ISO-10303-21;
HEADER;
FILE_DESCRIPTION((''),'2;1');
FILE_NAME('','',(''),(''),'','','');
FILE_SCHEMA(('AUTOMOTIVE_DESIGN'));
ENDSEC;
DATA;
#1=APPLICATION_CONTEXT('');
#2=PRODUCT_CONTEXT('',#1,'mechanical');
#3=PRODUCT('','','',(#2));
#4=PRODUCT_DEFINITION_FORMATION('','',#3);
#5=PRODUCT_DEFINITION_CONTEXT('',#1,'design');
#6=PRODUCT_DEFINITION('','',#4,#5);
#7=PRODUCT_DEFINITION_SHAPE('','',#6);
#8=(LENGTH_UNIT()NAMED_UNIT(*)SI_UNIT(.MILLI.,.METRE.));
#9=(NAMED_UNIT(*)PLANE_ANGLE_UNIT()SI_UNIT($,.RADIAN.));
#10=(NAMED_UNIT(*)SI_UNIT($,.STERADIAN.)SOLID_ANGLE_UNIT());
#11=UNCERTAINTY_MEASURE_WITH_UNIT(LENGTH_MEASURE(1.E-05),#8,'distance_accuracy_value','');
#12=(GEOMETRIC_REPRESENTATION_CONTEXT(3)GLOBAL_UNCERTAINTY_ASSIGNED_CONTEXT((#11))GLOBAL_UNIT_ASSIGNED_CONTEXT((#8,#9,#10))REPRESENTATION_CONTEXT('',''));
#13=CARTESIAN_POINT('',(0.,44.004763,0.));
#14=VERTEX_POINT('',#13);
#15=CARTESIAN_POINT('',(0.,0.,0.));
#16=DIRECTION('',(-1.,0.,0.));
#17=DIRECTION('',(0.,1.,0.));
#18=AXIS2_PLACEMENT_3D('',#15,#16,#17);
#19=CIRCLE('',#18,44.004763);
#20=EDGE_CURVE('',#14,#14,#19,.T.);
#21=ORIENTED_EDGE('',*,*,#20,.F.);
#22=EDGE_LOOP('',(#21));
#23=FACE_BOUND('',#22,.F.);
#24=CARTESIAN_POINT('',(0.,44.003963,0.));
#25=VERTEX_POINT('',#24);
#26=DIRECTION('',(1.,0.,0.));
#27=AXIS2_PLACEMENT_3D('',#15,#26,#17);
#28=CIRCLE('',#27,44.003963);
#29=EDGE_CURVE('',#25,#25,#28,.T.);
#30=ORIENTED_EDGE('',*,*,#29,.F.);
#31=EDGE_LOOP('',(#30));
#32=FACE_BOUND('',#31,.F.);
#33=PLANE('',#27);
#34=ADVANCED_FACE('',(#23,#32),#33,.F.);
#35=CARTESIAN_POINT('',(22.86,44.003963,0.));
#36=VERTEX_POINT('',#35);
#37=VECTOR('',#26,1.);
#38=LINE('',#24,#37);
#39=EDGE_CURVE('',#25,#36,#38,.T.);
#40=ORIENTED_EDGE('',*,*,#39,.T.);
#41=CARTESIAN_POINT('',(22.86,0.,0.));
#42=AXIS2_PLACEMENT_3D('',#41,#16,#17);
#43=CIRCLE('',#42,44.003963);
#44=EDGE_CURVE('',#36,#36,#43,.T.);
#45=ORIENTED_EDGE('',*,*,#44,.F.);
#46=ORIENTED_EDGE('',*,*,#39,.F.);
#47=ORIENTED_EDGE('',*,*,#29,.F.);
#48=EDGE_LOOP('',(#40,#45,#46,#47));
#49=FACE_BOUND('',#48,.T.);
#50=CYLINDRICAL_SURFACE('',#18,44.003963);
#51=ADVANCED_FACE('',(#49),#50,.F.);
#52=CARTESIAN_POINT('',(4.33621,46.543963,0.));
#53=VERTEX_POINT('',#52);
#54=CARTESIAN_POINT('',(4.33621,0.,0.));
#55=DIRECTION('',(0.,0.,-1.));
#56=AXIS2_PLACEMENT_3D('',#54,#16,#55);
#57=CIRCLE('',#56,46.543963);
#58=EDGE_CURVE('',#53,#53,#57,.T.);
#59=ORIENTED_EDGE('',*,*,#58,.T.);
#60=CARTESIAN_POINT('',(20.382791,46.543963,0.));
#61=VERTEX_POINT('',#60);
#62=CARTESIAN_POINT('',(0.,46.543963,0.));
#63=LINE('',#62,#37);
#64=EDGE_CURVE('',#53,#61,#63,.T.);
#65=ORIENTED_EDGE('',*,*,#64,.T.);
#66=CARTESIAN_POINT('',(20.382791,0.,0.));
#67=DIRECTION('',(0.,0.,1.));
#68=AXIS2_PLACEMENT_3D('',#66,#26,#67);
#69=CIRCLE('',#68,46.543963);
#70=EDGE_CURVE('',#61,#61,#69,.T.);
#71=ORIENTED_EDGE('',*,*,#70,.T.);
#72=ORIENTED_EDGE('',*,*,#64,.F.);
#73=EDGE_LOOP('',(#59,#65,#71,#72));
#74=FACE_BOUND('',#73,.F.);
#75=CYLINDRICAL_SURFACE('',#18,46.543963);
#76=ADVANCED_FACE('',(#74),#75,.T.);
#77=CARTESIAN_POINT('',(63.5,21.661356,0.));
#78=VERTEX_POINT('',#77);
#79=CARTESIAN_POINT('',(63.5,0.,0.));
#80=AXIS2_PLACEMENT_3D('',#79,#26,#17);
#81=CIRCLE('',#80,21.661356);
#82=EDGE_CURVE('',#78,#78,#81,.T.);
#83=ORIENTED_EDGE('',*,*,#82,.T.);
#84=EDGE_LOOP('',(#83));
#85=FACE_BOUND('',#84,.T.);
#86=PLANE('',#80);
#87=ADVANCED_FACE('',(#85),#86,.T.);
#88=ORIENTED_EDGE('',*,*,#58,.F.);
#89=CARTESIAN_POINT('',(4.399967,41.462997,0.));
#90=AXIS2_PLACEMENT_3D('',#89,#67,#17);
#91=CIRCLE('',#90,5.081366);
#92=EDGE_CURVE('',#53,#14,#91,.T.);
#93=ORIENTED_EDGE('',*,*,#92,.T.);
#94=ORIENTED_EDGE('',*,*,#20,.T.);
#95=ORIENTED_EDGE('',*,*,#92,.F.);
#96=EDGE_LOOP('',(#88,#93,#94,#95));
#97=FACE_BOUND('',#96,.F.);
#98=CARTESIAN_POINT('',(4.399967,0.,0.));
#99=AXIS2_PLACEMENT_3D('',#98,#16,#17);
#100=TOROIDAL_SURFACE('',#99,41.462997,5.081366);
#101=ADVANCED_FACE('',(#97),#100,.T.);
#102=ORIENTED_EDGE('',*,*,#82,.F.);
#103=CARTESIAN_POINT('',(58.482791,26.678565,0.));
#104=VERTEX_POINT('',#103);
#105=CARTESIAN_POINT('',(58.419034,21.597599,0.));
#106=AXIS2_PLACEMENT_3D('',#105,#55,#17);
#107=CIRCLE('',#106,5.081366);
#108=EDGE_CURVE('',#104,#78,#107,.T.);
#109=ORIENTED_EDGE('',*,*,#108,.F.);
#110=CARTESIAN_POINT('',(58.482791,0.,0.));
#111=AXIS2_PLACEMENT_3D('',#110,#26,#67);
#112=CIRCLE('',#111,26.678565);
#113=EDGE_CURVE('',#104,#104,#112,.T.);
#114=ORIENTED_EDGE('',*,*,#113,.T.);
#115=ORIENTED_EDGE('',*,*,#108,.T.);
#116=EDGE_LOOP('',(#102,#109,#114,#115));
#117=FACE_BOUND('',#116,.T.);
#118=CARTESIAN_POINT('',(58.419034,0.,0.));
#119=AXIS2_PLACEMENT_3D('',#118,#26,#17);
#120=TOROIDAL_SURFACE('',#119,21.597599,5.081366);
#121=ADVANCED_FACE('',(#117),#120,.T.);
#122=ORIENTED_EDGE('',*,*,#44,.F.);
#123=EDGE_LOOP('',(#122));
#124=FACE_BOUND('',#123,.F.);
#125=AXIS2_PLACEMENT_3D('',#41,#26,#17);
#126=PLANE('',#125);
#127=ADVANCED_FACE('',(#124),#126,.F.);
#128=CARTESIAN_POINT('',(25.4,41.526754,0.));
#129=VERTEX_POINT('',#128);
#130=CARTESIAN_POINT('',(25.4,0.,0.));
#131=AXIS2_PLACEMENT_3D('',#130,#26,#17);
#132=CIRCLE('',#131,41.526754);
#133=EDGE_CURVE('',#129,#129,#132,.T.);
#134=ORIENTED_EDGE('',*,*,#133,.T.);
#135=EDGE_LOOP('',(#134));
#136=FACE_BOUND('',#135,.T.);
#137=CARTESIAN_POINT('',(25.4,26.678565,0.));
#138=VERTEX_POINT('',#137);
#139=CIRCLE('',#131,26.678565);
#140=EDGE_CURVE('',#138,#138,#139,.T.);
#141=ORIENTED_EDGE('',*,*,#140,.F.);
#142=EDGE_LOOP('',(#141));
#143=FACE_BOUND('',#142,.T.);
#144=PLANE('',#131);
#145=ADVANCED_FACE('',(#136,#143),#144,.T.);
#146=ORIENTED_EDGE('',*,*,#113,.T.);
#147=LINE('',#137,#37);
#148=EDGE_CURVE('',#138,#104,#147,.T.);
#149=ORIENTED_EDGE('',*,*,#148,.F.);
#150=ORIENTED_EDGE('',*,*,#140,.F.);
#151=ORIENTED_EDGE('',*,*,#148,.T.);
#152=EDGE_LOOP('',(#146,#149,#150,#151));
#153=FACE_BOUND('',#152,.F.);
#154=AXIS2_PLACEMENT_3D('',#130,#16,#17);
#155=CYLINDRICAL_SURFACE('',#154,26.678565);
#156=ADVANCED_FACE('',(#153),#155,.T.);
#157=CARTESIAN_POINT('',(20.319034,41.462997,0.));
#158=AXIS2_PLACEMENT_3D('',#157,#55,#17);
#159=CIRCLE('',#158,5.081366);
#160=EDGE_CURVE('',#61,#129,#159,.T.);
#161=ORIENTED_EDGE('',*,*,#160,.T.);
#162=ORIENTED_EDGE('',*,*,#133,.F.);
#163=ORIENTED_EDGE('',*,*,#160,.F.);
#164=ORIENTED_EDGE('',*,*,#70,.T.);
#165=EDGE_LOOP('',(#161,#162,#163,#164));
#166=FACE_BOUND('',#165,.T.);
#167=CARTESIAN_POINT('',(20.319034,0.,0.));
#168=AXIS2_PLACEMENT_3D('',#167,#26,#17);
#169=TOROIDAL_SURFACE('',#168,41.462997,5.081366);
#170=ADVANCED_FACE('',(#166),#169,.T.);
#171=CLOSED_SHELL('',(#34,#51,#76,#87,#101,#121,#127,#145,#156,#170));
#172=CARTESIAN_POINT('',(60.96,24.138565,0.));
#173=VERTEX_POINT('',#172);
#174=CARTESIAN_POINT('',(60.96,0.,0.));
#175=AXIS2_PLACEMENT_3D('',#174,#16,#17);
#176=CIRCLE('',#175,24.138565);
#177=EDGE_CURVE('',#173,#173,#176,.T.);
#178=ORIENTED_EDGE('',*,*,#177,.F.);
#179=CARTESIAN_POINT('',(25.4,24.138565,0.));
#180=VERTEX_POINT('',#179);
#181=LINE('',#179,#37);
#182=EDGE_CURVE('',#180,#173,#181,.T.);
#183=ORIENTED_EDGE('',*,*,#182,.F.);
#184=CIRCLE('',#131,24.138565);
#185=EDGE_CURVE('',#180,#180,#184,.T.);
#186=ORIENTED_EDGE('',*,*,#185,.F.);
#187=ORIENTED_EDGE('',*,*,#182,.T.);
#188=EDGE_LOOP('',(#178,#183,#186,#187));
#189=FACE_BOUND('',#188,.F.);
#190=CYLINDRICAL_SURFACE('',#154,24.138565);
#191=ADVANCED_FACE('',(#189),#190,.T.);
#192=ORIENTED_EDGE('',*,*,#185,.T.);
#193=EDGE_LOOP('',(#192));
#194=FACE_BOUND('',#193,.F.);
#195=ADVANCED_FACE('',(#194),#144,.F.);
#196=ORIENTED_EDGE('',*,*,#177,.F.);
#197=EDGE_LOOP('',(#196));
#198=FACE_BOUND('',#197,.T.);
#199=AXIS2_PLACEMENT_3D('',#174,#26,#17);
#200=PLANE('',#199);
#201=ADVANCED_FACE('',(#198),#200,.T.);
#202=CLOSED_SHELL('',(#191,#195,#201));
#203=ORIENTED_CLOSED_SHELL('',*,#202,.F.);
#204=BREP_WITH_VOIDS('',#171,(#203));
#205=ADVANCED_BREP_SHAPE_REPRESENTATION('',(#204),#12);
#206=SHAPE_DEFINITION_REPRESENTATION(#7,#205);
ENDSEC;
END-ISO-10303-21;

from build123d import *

# Parameters (mm, degrees)
F0_R     = 46.5439630146
F1_DEPTH = 25.4
F2_T     = -2.54
F3_R     = 26.6785648963
F4_DEPTH = 38.1
F5_T     = 2.54


# Not quite as in the source:
# - a fillet or chamfer that OpenCascade refuses, or shapes differently, is made with other operations: its cross-section is extruded or revolved along the edge and cut away or added
# - a shell that OpenCascade refuses in one call is made with other operations: the cavity is built on its own and cut out


with BuildPart() as f1:
    # F0 (on Right) → F1 (new body)
    with BuildSketch(Plane.YZ):
        Circle(F0_R)
    extrude(amount=F1_DEPTH)

    # F2
    f2_openings = [f1.faces().sort_by_distance(p)[0] for p in [
        (0, 0, 0),
    ]]
    offset(amount=F2_T, openings=f2_openings)

    # F3 (on face) → F4 (join)
    with BuildSketch(Plane.YZ.offset(25.4)):
        Circle(F3_R)
    extrude(amount=F4_DEPTH)

    # F5: shell of thickness 2.54, made by hand


with BuildPart() as f5_core1:
    # F5_t2: copy of F1
    add(f1.part)

    # the walls: a layer under each face that stays
    f5_faces = [f5_core1.faces().sort_by_distance(p)[0] for p in [
        (12.7, -46.5439630146, 0),
        (0, -43.441032147, -12.4117234706),
        (11.43, -44.0039630146, 0),
        (44.45, -26.6785648963, 0),
        (22.86, 0, 0),
        (63.5, 0, 0),
    ]]
    thicken(f5_faces, amount=-F5_T, mode=Mode.SUBTRACT)

    # F5_s3 → F5_t4 (revolve, cut)
    with BuildSketch(Plane.XY):
        Polygon((22.8346, 43.9785630146), (22.86, 46.5439630146), (25.4, 46.5439630146), (25.4, 44.0039630146), align=None)
    revolve(axis=Axis((22.86, 0, 0), (-1, 0, 0)), mode=Mode.SUBTRACT)


with BuildPart() as f1_1:
    add(f1.part)

    # what is left inside the walls is the cavity
    f5_cavity = [f5_core1.part.solids().sort_by_distance(p)[0] for p in [
        (49.106667, -24.113165, 0),
    ]]
    add(f5_cavity, mode=Mode.SUBTRACT)

    # F6: fillet of radius 5.08 on 3 edges, made by hand

    # F6_s1 → F6_t2 (revolve, cut)
    with BuildSketch(Plane.XY):
        with BuildLine():
            ThreePointArc((4.3999665546, 46.5443630146), (1.8595251638, 45.8637284922), (-0.0003463882, 44.0041630527))
            Line((-0.0003463882, 44.0041630527), (-0.4403776825, 44.258279625))
            ThreePointArc((-0.4403776825, 44.258279625), (-0.5081365685, 45.2740630337), (-0.5081365685, 46.5439630146))
            Line((-0.5081365685, 46.5439630146), (0, 47.0520995832))
            ThreePointArc((0, 47.0520995832), (2.1999832773, 47.0520995832), (4.3999665546, 47.0524995832))
            Line((4.3999665546, 47.0524995832), (4.3999665546, 46.5443630146))
        make_face()
    revolve(axis=Axis((0, 0, 0), (1, 0, 0)), mode=Mode.SUBTRACT)

    # F6_s3 → F6_t4 (revolve, cut)
    with BuildSketch(Plane.XY):
        with BuildLine():
            ThreePointArc((20.3190343146, 46.5443630146), (23.9121024484, 45.0560654631), (25.4004, 41.4629973292))
            Line((25.4004, 41.4629973292), (25.9085365685, 41.4629973292))
            ThreePointArc((25.9085365685, 41.4629973292), (25.9081365685, 44.0034801719), (25.9081365685, 46.5439630146))
            Line((25.9081365685, 46.5439630146), (25.4, 47.0520995832))
            ThreePointArc((25.4, 47.0520995832), (22.8595171573, 47.0520995832), (20.3190343146, 47.0524995832))
            Line((20.3190343146, 47.0524995832), (20.3190343146, 46.5443630146))
        make_face()
    revolve(axis=Axis((25.4, 0, 0), (1, 0, 0)), mode=Mode.SUBTRACT)

    # F6_s5 → F6_t6 (revolve, cut)
    with BuildSketch(Plane.XY):
        with BuildLine():
            ThreePointArc((58.4190343146, 26.6789648963), (62.0121024484, 25.1906673448), (63.5004, 21.5975992109))
            Line((63.5004, 21.5975992109), (64.0085365685, 21.5975992109))
            ThreePointArc((64.0085365685, 21.5975992109), (64.0081365685, 24.1380820536), (64.0081365685, 26.6785648963))
            Line((64.0081365685, 26.6785648963), (63.5, 27.1867014649))
            ThreePointArc((63.5, 27.1867014649), (60.9595171573, 27.1867014649), (58.4190343146, 27.1871014649))
            Line((58.4190343146, 27.1871014649), (58.4190343146, 26.6789648963))
        make_face()
    revolve(axis=Axis((63.5, 0, 0), (1, 0, 0)), mode=Mode.SUBTRACT)


solid = f1_1.part
